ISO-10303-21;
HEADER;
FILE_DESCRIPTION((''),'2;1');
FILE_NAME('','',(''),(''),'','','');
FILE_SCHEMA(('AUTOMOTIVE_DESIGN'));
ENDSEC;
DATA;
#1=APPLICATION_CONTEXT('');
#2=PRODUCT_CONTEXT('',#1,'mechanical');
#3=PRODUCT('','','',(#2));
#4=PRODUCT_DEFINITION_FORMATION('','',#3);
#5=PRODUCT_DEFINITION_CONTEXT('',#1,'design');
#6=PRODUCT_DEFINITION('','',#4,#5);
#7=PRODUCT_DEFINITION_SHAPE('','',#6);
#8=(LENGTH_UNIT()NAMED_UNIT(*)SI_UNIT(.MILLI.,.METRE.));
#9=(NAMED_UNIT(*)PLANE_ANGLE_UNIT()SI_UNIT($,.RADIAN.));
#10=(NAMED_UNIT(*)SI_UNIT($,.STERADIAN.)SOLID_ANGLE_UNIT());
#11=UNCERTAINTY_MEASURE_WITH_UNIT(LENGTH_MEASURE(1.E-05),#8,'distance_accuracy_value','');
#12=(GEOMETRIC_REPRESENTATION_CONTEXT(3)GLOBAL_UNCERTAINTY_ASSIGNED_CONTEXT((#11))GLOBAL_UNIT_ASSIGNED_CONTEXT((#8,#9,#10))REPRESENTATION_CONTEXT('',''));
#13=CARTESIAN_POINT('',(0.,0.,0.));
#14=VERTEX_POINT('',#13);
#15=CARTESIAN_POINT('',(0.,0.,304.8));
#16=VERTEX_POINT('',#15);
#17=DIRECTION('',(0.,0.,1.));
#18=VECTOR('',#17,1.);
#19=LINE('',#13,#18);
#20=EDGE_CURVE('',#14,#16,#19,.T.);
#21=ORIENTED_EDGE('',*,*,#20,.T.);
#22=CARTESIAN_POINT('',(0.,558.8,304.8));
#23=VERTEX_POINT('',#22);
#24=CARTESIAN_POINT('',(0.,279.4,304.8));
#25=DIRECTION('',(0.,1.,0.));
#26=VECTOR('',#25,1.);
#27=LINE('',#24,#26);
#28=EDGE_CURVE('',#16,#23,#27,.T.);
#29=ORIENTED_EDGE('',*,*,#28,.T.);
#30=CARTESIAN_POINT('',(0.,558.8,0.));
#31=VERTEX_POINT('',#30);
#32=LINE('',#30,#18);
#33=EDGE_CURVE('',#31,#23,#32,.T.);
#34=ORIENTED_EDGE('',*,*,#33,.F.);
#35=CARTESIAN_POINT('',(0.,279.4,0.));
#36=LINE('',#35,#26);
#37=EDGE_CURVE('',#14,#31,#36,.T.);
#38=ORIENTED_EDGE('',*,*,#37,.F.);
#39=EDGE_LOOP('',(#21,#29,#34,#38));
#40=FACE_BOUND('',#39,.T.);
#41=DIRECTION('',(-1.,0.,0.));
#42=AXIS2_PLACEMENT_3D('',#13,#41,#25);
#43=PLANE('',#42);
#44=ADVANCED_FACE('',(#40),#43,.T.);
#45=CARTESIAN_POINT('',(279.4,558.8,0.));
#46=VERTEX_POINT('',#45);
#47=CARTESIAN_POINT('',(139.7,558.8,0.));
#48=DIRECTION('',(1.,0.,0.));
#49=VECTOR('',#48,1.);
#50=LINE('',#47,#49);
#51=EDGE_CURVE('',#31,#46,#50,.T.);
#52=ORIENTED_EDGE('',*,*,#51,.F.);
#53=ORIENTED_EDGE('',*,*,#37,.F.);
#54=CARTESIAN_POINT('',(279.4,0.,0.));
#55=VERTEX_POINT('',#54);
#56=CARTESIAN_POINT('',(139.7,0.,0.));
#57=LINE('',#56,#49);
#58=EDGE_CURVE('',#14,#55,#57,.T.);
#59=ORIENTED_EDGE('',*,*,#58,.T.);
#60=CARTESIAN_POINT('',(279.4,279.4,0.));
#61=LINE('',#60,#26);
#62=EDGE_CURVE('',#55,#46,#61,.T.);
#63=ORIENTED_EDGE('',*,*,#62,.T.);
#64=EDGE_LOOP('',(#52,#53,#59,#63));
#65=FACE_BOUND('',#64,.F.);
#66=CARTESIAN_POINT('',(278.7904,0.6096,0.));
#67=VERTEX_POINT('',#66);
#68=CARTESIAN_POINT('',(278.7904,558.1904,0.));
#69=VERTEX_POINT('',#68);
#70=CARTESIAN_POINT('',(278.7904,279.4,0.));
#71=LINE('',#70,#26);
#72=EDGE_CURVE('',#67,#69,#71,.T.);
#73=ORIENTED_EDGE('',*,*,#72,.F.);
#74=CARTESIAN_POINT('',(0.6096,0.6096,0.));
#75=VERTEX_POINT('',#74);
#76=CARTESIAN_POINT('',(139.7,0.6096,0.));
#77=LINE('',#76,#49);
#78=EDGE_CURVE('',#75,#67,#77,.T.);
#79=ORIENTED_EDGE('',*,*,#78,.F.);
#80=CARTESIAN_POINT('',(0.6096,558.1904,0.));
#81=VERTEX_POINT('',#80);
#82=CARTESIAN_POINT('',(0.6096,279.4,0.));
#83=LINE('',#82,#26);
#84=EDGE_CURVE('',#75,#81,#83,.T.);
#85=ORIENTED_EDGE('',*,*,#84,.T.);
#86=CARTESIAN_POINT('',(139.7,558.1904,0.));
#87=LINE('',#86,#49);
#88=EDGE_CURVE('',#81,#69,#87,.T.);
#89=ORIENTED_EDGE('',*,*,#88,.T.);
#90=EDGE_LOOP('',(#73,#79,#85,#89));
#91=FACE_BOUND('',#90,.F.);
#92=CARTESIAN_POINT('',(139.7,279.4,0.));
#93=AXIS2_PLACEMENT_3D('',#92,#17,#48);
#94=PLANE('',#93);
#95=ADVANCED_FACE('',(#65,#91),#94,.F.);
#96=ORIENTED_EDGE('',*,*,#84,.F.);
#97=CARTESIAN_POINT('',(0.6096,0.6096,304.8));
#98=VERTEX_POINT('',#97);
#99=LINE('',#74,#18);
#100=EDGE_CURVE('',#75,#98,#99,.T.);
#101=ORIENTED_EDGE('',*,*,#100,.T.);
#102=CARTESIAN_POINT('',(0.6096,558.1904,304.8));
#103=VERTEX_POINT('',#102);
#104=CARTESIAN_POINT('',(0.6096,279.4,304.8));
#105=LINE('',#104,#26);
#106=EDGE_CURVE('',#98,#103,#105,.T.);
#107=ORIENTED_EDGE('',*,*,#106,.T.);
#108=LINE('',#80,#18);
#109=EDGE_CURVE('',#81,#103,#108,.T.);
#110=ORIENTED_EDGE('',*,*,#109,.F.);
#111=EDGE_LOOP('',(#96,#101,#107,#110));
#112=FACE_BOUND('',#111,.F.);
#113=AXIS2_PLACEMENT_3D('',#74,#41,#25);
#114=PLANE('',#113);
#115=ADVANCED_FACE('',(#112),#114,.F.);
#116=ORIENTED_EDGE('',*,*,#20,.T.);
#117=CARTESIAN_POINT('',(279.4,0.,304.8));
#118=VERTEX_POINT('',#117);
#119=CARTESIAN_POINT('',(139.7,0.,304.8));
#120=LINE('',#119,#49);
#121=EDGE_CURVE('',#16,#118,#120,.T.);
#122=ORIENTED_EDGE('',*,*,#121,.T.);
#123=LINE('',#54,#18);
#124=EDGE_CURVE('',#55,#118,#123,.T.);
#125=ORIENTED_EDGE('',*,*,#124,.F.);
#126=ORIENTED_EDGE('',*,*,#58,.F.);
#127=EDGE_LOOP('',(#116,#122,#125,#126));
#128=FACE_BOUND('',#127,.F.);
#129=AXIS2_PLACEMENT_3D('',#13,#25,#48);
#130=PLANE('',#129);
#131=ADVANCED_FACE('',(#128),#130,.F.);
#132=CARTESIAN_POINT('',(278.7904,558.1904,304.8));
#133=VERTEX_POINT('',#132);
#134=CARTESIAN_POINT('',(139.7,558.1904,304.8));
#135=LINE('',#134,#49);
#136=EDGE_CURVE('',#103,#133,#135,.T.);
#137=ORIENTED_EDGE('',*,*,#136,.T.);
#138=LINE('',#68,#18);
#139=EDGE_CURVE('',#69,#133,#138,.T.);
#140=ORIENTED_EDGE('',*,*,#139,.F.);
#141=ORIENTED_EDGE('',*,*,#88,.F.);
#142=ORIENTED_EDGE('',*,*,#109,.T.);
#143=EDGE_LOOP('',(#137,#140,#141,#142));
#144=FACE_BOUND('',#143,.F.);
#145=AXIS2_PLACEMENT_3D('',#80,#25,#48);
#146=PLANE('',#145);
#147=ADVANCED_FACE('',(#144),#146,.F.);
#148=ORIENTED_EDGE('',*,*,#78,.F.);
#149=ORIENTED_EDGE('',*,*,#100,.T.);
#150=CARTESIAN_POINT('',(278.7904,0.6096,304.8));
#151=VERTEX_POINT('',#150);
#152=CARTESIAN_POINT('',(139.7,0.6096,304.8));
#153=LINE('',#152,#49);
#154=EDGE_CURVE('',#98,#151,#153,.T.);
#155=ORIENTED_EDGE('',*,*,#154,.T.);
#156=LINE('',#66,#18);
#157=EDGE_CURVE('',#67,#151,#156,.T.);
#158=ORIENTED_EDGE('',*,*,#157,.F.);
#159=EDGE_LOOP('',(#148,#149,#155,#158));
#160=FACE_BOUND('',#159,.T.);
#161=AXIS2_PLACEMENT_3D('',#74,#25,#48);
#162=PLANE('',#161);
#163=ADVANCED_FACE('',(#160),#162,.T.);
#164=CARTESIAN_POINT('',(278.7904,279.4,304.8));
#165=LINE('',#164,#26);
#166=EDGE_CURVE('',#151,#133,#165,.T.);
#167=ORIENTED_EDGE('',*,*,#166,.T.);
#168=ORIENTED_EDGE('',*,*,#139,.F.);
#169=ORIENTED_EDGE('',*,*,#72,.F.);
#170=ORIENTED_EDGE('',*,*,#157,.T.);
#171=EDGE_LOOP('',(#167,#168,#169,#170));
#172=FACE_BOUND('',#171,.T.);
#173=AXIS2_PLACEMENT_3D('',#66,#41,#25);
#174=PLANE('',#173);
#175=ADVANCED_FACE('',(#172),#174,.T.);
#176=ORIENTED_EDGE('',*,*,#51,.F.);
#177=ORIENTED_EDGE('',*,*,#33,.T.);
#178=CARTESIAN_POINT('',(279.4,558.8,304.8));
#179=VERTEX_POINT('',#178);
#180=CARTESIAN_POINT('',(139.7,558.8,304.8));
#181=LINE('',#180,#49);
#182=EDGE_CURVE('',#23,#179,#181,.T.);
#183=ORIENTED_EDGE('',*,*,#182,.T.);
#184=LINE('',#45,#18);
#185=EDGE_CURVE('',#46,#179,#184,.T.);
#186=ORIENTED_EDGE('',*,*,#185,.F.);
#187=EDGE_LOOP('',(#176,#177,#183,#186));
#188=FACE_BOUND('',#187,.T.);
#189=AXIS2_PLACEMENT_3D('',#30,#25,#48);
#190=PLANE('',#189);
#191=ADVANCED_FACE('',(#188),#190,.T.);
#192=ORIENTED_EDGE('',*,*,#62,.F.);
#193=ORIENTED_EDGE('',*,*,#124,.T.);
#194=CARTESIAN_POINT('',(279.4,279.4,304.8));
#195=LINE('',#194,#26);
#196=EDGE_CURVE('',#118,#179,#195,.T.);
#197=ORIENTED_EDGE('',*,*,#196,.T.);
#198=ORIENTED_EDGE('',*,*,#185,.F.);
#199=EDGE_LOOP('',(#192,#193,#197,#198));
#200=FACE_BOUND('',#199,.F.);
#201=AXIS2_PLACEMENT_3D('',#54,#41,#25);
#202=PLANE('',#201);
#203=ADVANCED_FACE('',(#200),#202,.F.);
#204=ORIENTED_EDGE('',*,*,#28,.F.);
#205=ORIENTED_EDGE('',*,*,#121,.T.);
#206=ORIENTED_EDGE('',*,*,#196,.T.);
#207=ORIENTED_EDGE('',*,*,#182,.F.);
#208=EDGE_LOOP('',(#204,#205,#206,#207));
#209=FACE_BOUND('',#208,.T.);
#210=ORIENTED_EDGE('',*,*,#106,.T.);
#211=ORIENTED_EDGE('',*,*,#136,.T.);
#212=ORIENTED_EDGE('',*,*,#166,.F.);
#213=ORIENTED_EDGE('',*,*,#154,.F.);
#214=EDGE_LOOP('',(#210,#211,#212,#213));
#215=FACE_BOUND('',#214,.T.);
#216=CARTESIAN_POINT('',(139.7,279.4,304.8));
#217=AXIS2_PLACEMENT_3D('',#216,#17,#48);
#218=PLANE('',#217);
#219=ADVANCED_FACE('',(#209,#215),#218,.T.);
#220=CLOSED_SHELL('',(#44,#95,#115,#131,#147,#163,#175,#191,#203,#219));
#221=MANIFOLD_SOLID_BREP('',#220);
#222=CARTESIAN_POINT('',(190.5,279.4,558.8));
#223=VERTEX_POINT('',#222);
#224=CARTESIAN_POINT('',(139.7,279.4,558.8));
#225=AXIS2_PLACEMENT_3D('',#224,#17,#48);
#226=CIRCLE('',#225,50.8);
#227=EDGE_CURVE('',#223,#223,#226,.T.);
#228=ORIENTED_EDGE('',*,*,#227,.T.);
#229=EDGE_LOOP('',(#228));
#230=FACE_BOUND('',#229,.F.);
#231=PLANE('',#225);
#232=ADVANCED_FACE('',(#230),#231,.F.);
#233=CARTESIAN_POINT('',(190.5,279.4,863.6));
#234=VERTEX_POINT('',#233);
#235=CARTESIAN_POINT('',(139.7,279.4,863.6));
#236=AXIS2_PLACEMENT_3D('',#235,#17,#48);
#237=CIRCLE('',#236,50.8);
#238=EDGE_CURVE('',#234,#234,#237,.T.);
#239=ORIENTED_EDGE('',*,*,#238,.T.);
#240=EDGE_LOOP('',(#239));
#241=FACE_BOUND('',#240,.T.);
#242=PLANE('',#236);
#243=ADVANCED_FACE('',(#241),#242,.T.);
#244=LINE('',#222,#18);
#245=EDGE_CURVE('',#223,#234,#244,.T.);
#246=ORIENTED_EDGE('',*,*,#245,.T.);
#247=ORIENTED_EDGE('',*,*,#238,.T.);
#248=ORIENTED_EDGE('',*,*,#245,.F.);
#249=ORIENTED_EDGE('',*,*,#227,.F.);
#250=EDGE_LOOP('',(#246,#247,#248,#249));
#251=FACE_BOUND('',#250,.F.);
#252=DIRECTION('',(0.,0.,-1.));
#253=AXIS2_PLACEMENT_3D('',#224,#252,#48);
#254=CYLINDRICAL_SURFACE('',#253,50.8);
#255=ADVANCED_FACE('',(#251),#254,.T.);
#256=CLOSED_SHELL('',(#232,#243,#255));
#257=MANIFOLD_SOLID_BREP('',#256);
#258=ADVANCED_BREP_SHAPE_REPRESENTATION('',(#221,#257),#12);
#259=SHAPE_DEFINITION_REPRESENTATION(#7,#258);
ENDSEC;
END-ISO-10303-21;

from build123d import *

# Parameters (mm, degrees)
F0_W      = 279.4
F0_H      = 558.8
F0_W_2    = 278.1808
F0_H_2    = 557.5808
F1_DEPTH  = 304.8
F10_R     = 50.8
F11_DEPTH = 304.8


# Not quite as in the source:
# - the program builds the solid bodies; features that only make, move or delete a surface that nothing else refers to are left out


with BuildPart() as f1:
    # F0 (on Top) → F1 (new body)
    with BuildSketch(Plane.XY):
        with Locations((139.7, 279.4)):
            Rectangle(F0_W, F0_H)
        with Locations((139.7, 279.4)):
            Rectangle(F0_W_2, F0_H_2, mode=Mode.SUBTRACT)
    extrude(amount=F1_DEPTH)


with BuildPart() as f11:
    # F10 (on offset) → F11 (new body)
    with BuildSketch(Plane.XY.offset(558.8)):
        with Locations((139.7, 279.4)):
            Circle(F10_R)
    extrude(amount=F11_DEPTH)


solid = Compound([f1.part, f11.part])
